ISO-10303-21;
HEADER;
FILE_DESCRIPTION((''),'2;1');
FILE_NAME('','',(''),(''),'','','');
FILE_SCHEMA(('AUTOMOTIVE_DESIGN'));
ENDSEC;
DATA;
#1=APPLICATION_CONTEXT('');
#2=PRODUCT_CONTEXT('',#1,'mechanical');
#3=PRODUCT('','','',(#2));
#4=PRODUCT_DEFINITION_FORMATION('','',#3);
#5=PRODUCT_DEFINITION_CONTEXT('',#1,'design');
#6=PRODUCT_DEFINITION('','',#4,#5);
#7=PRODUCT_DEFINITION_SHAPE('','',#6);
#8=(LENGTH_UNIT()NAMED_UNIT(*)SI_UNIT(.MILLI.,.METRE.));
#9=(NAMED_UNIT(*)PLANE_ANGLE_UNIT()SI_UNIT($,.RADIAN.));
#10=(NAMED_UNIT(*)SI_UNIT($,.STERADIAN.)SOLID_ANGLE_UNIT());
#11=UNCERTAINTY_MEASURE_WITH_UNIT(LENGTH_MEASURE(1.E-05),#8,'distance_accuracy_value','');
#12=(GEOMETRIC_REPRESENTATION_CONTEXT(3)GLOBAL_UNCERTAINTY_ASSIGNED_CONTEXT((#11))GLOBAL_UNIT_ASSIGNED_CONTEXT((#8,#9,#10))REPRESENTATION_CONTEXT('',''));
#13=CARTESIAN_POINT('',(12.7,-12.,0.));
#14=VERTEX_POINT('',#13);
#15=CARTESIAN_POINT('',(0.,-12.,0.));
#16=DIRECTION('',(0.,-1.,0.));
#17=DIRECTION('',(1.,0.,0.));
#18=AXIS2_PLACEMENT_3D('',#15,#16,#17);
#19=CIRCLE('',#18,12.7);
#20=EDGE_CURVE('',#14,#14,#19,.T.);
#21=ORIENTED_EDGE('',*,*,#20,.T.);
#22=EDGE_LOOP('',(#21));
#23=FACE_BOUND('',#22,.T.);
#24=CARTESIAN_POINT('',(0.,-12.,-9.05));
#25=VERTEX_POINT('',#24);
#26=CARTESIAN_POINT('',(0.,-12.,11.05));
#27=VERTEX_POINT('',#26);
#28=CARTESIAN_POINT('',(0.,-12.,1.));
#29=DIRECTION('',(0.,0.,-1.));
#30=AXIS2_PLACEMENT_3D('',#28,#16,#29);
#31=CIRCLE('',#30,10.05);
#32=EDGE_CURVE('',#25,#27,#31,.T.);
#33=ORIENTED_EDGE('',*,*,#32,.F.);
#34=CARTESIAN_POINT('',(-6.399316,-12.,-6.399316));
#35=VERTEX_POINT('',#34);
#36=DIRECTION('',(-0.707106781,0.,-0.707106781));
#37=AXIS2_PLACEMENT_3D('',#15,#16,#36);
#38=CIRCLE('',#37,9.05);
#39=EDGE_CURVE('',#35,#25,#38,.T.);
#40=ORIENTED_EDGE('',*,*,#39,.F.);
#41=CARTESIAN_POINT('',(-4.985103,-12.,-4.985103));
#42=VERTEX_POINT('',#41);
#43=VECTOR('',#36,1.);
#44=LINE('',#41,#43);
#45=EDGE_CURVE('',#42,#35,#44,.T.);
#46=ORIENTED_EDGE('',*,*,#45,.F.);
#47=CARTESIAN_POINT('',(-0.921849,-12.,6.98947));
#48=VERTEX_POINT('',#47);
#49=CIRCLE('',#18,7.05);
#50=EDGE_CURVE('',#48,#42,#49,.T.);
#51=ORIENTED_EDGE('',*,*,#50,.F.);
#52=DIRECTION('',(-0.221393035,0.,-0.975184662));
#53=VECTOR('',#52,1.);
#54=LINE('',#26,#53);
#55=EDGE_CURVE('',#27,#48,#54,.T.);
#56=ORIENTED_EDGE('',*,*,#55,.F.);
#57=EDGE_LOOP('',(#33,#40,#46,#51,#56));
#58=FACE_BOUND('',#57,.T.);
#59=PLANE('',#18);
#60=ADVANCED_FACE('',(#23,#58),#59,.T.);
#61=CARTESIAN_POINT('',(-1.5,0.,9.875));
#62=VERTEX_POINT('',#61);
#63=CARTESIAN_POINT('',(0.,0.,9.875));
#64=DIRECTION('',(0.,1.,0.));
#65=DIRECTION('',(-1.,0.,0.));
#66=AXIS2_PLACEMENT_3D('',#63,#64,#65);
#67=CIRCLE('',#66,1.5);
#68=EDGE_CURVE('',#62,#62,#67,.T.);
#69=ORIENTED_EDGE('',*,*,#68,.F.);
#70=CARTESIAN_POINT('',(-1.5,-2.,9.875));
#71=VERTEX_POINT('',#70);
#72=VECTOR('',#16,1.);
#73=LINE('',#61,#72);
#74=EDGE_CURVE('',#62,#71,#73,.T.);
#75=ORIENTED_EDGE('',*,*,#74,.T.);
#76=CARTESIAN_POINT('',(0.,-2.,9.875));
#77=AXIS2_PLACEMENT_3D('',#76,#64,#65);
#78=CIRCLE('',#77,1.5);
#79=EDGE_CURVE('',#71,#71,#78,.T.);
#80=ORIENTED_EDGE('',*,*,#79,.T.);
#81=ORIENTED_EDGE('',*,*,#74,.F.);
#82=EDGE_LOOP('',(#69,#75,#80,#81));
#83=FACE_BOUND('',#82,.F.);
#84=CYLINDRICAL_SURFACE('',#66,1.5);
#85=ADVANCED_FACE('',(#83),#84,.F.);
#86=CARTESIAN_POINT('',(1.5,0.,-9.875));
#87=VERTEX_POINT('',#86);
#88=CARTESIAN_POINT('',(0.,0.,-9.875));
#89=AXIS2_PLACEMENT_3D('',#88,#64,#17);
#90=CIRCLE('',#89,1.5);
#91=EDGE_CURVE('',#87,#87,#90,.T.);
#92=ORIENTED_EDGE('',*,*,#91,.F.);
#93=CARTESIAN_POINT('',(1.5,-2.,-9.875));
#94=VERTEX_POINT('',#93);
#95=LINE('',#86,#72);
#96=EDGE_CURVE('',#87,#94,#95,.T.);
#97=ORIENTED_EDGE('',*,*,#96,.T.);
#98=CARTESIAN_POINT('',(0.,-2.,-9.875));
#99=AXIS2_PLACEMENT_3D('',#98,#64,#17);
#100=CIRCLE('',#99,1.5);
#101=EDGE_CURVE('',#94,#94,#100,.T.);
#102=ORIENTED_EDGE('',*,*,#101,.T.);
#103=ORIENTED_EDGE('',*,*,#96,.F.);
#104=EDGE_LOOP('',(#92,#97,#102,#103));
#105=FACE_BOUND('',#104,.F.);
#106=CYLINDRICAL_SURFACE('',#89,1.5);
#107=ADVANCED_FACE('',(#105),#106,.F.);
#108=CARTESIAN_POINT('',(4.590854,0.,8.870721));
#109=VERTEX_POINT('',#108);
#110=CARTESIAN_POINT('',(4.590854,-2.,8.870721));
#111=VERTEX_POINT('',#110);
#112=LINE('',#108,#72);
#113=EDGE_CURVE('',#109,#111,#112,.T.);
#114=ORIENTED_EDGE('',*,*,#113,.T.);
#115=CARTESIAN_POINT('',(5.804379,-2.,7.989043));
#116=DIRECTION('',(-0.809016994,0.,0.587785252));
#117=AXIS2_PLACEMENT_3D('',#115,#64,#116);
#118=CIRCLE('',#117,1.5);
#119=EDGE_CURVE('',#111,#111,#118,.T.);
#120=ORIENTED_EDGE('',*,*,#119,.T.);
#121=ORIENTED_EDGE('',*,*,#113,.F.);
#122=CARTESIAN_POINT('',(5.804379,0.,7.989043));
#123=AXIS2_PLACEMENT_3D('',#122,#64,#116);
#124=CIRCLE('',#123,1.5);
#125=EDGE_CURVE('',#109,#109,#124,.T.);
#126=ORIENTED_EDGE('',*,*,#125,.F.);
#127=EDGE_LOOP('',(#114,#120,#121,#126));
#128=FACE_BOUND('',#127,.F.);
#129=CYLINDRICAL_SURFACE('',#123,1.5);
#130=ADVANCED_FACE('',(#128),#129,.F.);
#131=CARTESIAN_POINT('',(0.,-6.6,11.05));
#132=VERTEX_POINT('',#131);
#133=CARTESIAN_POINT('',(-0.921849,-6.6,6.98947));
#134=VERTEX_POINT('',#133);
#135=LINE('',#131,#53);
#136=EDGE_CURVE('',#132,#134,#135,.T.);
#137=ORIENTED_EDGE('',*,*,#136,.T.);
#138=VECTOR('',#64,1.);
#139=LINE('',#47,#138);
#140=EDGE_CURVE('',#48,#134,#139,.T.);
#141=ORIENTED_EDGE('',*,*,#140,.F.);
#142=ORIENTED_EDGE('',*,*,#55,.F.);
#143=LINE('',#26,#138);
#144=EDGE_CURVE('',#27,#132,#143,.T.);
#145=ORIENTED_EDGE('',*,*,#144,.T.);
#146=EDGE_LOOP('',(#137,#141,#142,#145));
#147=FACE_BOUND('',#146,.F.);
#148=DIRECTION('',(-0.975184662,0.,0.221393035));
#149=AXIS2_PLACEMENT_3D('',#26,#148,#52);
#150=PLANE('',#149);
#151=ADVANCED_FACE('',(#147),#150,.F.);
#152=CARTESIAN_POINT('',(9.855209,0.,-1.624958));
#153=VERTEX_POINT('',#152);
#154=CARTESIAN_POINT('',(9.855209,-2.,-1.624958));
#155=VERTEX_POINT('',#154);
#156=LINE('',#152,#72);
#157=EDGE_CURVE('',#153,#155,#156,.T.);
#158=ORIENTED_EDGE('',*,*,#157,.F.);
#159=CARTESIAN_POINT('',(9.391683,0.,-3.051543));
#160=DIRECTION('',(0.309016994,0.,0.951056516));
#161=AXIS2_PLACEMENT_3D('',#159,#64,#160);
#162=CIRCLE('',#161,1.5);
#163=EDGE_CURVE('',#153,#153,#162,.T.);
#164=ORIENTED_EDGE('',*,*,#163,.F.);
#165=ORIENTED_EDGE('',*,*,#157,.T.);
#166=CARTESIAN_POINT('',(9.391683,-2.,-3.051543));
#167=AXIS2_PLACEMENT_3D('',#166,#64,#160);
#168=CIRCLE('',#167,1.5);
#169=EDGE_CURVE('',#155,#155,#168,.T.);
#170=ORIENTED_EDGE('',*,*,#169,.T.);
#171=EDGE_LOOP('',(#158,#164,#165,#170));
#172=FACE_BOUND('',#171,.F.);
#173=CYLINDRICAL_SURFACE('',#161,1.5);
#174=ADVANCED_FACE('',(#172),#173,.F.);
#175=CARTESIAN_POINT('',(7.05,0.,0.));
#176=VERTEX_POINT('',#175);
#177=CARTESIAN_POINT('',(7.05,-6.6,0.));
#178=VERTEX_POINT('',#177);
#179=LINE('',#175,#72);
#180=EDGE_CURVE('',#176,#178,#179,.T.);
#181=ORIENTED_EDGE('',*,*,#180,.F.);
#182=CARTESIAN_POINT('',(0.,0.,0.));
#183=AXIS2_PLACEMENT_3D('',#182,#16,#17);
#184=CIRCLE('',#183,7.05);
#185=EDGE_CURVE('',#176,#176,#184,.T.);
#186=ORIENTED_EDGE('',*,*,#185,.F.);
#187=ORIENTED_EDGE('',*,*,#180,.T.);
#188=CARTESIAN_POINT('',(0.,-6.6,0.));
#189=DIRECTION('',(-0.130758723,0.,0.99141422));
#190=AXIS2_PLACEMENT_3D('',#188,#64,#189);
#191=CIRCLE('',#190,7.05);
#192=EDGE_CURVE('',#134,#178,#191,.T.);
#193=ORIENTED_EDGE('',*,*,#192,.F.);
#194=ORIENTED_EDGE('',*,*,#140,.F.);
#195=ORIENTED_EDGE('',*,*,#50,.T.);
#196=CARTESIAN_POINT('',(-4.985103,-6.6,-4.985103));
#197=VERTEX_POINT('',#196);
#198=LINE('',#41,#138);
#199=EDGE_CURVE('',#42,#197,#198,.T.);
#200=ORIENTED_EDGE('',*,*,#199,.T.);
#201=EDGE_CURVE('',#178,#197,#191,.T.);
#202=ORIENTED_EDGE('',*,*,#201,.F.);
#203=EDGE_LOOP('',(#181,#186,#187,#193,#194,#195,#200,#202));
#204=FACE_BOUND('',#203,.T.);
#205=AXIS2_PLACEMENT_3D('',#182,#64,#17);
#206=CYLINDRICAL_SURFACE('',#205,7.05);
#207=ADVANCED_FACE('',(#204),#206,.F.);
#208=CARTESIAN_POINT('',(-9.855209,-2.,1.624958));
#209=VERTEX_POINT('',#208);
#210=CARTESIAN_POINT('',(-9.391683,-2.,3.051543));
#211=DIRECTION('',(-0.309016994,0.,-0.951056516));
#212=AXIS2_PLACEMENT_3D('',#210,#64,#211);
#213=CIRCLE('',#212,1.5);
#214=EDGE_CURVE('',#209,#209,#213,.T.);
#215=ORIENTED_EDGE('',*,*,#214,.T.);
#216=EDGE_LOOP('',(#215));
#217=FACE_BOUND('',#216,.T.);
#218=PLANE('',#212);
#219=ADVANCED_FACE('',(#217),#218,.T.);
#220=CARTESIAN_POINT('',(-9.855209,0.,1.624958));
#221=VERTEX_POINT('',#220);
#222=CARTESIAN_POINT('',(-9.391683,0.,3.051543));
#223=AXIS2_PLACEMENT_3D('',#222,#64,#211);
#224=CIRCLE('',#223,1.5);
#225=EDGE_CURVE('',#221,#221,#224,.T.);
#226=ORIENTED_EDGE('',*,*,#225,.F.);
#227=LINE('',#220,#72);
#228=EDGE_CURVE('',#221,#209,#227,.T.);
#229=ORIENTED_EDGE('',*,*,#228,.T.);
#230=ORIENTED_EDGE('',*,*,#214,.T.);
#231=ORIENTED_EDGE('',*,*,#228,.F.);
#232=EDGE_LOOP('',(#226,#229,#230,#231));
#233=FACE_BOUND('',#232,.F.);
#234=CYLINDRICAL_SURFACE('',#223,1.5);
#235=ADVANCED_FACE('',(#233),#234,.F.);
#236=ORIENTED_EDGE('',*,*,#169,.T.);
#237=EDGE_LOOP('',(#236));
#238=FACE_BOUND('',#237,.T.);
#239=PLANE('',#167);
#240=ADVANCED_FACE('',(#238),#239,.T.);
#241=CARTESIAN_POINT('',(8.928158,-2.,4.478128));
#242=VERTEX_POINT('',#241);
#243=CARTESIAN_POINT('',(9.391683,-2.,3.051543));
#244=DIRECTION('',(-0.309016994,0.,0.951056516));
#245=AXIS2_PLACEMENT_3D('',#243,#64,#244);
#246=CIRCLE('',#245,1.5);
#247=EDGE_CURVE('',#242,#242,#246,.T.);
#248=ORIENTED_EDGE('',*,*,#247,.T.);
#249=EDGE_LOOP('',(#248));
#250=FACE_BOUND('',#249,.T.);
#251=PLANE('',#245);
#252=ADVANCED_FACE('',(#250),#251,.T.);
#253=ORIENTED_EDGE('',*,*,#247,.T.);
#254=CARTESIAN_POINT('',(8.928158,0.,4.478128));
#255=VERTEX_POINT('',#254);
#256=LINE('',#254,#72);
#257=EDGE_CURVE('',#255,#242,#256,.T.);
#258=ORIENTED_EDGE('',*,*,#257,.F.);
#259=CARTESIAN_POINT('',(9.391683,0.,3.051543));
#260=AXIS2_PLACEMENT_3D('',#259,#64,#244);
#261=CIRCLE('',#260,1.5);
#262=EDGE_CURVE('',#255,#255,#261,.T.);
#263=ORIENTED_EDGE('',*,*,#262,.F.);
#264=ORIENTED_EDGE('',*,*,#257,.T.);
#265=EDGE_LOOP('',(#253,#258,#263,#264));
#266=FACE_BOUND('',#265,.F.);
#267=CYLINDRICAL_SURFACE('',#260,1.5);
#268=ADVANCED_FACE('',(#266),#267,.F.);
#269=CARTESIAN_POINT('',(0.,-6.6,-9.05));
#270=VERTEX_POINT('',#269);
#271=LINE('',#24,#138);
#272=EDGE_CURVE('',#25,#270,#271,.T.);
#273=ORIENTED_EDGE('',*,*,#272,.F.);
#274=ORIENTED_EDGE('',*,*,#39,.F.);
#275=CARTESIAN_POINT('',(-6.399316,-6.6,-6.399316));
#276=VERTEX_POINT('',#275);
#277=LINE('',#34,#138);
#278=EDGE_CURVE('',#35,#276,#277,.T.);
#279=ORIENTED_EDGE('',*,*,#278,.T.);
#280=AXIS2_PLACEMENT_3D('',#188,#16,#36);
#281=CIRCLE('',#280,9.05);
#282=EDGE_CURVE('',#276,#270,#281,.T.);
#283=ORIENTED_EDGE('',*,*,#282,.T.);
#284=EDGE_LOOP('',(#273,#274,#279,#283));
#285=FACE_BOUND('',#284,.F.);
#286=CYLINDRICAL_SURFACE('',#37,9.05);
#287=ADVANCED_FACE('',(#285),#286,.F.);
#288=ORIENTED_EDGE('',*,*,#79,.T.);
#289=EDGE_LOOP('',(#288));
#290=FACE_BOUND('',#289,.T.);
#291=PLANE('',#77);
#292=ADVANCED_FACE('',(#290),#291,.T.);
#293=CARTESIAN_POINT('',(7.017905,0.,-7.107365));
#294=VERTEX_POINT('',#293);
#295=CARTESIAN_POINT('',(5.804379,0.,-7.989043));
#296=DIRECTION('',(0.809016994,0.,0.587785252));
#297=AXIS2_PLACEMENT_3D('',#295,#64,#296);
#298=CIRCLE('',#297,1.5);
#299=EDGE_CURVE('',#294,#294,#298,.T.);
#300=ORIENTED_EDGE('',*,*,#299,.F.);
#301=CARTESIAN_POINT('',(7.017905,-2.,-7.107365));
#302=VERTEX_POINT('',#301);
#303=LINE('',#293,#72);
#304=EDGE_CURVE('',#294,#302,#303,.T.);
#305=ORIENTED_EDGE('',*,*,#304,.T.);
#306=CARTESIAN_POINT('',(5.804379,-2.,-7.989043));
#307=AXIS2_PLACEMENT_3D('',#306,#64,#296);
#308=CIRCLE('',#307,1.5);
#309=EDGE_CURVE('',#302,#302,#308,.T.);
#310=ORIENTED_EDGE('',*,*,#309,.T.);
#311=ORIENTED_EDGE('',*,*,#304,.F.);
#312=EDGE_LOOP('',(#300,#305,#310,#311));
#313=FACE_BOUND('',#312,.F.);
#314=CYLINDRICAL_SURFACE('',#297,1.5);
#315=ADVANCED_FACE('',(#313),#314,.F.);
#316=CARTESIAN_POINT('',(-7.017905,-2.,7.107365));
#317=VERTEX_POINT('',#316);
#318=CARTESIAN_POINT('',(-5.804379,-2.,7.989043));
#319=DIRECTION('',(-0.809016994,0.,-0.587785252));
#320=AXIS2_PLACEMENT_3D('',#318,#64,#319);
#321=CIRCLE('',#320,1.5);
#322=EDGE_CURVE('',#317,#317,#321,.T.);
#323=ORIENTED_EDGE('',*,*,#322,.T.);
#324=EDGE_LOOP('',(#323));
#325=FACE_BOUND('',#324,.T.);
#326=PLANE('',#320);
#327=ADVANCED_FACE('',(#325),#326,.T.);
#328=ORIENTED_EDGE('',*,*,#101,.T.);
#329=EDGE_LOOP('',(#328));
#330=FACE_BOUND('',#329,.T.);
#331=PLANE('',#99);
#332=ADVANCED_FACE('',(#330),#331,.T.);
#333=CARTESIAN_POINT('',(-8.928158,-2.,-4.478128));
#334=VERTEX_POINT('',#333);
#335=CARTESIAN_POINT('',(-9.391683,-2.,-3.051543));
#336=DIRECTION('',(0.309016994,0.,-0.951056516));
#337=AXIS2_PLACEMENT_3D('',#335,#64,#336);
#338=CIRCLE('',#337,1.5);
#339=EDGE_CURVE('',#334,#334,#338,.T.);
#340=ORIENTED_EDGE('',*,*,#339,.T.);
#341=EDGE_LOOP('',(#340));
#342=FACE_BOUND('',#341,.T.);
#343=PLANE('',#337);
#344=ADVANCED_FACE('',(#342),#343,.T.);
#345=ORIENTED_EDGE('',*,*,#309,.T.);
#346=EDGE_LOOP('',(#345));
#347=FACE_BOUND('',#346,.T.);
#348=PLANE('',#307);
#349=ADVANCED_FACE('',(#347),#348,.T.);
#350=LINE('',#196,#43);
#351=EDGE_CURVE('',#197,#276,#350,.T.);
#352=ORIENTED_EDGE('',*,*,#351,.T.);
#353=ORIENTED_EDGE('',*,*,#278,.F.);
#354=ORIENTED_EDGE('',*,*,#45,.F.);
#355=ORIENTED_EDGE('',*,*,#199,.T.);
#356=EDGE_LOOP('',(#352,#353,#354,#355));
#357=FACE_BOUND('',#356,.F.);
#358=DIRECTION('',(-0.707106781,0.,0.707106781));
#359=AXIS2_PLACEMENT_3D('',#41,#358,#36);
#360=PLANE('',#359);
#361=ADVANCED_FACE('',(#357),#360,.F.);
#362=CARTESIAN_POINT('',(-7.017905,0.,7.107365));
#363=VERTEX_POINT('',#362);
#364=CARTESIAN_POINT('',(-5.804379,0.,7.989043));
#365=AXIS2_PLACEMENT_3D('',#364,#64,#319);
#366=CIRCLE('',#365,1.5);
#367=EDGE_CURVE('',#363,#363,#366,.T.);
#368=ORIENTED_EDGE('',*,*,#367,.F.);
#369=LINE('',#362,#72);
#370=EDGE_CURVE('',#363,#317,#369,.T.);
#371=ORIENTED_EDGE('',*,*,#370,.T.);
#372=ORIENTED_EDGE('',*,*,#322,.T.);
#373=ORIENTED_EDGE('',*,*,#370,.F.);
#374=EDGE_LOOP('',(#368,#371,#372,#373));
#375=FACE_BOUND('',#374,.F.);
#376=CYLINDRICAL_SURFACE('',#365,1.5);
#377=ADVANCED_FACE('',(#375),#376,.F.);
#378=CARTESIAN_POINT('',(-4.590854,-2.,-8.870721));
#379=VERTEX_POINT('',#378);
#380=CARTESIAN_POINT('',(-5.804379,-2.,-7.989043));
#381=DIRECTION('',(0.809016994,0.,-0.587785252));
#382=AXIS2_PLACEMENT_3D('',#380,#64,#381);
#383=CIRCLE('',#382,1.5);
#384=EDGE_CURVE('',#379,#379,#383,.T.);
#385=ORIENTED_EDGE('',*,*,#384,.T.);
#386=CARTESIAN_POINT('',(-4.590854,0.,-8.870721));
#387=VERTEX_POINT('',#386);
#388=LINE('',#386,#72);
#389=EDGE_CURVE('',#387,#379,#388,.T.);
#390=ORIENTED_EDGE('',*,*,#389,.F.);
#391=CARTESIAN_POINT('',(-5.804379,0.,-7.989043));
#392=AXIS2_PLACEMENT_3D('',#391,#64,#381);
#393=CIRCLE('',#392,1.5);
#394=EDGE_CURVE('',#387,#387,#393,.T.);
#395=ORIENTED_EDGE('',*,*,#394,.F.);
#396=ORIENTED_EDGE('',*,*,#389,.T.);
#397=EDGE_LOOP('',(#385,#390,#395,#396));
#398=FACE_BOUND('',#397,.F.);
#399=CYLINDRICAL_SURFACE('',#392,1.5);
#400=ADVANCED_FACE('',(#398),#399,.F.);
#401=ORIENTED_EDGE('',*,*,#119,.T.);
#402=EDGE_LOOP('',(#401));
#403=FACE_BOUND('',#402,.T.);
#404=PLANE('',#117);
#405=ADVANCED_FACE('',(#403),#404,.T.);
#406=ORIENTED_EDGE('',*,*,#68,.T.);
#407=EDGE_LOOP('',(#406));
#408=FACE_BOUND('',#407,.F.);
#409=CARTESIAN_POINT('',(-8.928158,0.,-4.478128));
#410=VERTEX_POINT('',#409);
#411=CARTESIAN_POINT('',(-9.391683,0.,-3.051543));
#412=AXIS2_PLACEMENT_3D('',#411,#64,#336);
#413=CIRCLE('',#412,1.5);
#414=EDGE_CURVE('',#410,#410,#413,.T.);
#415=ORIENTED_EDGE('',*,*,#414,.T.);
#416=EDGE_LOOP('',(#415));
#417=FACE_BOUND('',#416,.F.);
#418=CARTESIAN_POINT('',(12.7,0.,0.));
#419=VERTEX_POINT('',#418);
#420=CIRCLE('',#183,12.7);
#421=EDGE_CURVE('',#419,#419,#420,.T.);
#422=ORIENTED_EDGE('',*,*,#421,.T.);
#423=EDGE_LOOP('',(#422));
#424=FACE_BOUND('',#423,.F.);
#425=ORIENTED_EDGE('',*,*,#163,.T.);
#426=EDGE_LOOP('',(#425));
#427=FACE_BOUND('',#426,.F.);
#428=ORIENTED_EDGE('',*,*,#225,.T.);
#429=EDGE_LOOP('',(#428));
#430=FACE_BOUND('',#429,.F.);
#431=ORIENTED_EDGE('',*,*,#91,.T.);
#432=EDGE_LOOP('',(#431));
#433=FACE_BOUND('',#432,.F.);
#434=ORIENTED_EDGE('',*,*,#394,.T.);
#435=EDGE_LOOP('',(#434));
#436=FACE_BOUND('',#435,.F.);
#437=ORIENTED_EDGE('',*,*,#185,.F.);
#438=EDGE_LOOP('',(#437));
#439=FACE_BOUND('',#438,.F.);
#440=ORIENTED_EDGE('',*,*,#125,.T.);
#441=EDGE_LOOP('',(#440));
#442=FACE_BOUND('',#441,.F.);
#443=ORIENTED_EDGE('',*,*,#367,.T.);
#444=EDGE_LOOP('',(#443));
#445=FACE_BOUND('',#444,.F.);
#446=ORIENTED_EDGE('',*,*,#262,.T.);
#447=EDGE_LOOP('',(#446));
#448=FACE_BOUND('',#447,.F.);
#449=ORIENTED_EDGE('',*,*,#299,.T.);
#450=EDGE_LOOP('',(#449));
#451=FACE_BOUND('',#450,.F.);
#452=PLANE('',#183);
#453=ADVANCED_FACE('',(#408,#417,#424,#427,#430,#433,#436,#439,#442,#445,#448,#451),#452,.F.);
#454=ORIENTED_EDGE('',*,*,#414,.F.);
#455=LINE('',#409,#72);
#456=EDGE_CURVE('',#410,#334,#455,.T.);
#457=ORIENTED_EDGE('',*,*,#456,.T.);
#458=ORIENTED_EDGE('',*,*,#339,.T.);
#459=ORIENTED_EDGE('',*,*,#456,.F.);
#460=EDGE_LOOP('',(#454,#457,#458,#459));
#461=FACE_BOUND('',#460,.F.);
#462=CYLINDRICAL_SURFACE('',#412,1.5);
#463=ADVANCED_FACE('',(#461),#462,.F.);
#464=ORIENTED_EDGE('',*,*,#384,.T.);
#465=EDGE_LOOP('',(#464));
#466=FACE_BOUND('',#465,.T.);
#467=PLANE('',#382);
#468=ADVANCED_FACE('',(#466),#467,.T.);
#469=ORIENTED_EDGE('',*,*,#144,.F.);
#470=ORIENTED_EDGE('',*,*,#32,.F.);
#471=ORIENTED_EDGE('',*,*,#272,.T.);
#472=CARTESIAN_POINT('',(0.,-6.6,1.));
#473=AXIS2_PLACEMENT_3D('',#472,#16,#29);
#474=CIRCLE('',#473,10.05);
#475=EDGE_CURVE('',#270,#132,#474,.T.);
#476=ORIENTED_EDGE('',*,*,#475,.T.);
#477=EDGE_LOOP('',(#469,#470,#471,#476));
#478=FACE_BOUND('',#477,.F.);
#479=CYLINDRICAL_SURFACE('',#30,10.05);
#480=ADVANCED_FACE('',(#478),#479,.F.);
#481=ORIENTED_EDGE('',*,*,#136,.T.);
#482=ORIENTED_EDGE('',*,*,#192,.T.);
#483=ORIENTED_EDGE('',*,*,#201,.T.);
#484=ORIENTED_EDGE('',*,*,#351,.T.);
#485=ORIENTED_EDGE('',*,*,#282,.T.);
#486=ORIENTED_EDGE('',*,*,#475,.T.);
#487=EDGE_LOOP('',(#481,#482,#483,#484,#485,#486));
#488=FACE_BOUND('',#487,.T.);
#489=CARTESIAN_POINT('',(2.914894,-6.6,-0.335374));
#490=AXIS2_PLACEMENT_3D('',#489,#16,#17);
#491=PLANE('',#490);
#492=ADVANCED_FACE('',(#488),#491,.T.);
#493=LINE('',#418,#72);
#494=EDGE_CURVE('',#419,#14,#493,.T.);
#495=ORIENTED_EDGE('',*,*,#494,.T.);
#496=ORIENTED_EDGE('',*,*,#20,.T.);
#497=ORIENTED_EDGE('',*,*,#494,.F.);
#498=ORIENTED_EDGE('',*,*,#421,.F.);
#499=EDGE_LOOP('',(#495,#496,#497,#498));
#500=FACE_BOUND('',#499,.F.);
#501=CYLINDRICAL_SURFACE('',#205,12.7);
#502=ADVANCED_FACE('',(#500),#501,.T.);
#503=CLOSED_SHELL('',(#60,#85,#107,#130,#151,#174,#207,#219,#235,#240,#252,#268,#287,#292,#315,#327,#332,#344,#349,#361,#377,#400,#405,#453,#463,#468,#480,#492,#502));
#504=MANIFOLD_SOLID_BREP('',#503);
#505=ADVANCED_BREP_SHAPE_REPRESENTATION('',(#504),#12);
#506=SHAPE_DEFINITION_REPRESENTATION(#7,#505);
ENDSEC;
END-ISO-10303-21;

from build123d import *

# Parameters (mm, degrees)
F0_R            = 12.7
F0_R_2          = 7.05
F1_DEPTH        = 12
F3_DEPTH        = 5.4
F4_R            = 1.5
F5_DEPTH        = 2
F5_COPIES_COUNT = 10


# Not quite as in the source:
# - a pattern or mirror of a feature is missing from the dataset's text; its kind, count and spacing are read off the source's solid


with BuildPart() as f1:
    # F0 (on Front) → F1 (new body)
    with BuildSketch(Plane.XZ):
        Circle(F0_R)
        Circle(F0_R_2, mode=Mode.SUBTRACT)
    extrude(amount=F1_DEPTH)

    # F2 (on face) → F3 (cut)
    with BuildSketch(Plane.XZ.offset(12)):
        with BuildLine():
            Line((-4.9851028074, -4.9851028074), (-6.3993163697, -6.3993163697))
            ThreePointArc((-6.3993163697, -6.3993163697), (-3.4632850629, -8.3611097692), (0, -9.05))
            ThreePointArc((0, -9.05), (10.05, 1), (0, 11.05))
            Line((0, 11.05), (-0.9218489985, 6.9894702535))
            ThreePointArc((-0.9218489985, 6.9894702535), (6.6761231195, -2.2653653334), (-4.9851028074, -4.9851028074))
        make_face()
    extrude(amount=-F3_DEPTH, mode=Mode.SUBTRACT)

    # F4 (on face) → F5 (cut)
    with BuildSketch(Plane(origin=(0, 0, 0), x_dir=(-1, 0, 0), z_dir=(0, 1, 0))):
        with Locations((0, 9.875)):
            Circle(F4_R)
    f5 = extrude(amount=-F5_DEPTH, mode=Mode.SUBTRACT)

    # F5_copies: F5 ×10 about axis
    f5_copies_axis = Axis((0, 0, 0), (0, 1, 0))
    for i in range(1, F5_COPIES_COUNT):
        add(f5.rotate(f5_copies_axis, i * 360 / F5_COPIES_COUNT), mode=Mode.SUBTRACT)


solid = f1.part
